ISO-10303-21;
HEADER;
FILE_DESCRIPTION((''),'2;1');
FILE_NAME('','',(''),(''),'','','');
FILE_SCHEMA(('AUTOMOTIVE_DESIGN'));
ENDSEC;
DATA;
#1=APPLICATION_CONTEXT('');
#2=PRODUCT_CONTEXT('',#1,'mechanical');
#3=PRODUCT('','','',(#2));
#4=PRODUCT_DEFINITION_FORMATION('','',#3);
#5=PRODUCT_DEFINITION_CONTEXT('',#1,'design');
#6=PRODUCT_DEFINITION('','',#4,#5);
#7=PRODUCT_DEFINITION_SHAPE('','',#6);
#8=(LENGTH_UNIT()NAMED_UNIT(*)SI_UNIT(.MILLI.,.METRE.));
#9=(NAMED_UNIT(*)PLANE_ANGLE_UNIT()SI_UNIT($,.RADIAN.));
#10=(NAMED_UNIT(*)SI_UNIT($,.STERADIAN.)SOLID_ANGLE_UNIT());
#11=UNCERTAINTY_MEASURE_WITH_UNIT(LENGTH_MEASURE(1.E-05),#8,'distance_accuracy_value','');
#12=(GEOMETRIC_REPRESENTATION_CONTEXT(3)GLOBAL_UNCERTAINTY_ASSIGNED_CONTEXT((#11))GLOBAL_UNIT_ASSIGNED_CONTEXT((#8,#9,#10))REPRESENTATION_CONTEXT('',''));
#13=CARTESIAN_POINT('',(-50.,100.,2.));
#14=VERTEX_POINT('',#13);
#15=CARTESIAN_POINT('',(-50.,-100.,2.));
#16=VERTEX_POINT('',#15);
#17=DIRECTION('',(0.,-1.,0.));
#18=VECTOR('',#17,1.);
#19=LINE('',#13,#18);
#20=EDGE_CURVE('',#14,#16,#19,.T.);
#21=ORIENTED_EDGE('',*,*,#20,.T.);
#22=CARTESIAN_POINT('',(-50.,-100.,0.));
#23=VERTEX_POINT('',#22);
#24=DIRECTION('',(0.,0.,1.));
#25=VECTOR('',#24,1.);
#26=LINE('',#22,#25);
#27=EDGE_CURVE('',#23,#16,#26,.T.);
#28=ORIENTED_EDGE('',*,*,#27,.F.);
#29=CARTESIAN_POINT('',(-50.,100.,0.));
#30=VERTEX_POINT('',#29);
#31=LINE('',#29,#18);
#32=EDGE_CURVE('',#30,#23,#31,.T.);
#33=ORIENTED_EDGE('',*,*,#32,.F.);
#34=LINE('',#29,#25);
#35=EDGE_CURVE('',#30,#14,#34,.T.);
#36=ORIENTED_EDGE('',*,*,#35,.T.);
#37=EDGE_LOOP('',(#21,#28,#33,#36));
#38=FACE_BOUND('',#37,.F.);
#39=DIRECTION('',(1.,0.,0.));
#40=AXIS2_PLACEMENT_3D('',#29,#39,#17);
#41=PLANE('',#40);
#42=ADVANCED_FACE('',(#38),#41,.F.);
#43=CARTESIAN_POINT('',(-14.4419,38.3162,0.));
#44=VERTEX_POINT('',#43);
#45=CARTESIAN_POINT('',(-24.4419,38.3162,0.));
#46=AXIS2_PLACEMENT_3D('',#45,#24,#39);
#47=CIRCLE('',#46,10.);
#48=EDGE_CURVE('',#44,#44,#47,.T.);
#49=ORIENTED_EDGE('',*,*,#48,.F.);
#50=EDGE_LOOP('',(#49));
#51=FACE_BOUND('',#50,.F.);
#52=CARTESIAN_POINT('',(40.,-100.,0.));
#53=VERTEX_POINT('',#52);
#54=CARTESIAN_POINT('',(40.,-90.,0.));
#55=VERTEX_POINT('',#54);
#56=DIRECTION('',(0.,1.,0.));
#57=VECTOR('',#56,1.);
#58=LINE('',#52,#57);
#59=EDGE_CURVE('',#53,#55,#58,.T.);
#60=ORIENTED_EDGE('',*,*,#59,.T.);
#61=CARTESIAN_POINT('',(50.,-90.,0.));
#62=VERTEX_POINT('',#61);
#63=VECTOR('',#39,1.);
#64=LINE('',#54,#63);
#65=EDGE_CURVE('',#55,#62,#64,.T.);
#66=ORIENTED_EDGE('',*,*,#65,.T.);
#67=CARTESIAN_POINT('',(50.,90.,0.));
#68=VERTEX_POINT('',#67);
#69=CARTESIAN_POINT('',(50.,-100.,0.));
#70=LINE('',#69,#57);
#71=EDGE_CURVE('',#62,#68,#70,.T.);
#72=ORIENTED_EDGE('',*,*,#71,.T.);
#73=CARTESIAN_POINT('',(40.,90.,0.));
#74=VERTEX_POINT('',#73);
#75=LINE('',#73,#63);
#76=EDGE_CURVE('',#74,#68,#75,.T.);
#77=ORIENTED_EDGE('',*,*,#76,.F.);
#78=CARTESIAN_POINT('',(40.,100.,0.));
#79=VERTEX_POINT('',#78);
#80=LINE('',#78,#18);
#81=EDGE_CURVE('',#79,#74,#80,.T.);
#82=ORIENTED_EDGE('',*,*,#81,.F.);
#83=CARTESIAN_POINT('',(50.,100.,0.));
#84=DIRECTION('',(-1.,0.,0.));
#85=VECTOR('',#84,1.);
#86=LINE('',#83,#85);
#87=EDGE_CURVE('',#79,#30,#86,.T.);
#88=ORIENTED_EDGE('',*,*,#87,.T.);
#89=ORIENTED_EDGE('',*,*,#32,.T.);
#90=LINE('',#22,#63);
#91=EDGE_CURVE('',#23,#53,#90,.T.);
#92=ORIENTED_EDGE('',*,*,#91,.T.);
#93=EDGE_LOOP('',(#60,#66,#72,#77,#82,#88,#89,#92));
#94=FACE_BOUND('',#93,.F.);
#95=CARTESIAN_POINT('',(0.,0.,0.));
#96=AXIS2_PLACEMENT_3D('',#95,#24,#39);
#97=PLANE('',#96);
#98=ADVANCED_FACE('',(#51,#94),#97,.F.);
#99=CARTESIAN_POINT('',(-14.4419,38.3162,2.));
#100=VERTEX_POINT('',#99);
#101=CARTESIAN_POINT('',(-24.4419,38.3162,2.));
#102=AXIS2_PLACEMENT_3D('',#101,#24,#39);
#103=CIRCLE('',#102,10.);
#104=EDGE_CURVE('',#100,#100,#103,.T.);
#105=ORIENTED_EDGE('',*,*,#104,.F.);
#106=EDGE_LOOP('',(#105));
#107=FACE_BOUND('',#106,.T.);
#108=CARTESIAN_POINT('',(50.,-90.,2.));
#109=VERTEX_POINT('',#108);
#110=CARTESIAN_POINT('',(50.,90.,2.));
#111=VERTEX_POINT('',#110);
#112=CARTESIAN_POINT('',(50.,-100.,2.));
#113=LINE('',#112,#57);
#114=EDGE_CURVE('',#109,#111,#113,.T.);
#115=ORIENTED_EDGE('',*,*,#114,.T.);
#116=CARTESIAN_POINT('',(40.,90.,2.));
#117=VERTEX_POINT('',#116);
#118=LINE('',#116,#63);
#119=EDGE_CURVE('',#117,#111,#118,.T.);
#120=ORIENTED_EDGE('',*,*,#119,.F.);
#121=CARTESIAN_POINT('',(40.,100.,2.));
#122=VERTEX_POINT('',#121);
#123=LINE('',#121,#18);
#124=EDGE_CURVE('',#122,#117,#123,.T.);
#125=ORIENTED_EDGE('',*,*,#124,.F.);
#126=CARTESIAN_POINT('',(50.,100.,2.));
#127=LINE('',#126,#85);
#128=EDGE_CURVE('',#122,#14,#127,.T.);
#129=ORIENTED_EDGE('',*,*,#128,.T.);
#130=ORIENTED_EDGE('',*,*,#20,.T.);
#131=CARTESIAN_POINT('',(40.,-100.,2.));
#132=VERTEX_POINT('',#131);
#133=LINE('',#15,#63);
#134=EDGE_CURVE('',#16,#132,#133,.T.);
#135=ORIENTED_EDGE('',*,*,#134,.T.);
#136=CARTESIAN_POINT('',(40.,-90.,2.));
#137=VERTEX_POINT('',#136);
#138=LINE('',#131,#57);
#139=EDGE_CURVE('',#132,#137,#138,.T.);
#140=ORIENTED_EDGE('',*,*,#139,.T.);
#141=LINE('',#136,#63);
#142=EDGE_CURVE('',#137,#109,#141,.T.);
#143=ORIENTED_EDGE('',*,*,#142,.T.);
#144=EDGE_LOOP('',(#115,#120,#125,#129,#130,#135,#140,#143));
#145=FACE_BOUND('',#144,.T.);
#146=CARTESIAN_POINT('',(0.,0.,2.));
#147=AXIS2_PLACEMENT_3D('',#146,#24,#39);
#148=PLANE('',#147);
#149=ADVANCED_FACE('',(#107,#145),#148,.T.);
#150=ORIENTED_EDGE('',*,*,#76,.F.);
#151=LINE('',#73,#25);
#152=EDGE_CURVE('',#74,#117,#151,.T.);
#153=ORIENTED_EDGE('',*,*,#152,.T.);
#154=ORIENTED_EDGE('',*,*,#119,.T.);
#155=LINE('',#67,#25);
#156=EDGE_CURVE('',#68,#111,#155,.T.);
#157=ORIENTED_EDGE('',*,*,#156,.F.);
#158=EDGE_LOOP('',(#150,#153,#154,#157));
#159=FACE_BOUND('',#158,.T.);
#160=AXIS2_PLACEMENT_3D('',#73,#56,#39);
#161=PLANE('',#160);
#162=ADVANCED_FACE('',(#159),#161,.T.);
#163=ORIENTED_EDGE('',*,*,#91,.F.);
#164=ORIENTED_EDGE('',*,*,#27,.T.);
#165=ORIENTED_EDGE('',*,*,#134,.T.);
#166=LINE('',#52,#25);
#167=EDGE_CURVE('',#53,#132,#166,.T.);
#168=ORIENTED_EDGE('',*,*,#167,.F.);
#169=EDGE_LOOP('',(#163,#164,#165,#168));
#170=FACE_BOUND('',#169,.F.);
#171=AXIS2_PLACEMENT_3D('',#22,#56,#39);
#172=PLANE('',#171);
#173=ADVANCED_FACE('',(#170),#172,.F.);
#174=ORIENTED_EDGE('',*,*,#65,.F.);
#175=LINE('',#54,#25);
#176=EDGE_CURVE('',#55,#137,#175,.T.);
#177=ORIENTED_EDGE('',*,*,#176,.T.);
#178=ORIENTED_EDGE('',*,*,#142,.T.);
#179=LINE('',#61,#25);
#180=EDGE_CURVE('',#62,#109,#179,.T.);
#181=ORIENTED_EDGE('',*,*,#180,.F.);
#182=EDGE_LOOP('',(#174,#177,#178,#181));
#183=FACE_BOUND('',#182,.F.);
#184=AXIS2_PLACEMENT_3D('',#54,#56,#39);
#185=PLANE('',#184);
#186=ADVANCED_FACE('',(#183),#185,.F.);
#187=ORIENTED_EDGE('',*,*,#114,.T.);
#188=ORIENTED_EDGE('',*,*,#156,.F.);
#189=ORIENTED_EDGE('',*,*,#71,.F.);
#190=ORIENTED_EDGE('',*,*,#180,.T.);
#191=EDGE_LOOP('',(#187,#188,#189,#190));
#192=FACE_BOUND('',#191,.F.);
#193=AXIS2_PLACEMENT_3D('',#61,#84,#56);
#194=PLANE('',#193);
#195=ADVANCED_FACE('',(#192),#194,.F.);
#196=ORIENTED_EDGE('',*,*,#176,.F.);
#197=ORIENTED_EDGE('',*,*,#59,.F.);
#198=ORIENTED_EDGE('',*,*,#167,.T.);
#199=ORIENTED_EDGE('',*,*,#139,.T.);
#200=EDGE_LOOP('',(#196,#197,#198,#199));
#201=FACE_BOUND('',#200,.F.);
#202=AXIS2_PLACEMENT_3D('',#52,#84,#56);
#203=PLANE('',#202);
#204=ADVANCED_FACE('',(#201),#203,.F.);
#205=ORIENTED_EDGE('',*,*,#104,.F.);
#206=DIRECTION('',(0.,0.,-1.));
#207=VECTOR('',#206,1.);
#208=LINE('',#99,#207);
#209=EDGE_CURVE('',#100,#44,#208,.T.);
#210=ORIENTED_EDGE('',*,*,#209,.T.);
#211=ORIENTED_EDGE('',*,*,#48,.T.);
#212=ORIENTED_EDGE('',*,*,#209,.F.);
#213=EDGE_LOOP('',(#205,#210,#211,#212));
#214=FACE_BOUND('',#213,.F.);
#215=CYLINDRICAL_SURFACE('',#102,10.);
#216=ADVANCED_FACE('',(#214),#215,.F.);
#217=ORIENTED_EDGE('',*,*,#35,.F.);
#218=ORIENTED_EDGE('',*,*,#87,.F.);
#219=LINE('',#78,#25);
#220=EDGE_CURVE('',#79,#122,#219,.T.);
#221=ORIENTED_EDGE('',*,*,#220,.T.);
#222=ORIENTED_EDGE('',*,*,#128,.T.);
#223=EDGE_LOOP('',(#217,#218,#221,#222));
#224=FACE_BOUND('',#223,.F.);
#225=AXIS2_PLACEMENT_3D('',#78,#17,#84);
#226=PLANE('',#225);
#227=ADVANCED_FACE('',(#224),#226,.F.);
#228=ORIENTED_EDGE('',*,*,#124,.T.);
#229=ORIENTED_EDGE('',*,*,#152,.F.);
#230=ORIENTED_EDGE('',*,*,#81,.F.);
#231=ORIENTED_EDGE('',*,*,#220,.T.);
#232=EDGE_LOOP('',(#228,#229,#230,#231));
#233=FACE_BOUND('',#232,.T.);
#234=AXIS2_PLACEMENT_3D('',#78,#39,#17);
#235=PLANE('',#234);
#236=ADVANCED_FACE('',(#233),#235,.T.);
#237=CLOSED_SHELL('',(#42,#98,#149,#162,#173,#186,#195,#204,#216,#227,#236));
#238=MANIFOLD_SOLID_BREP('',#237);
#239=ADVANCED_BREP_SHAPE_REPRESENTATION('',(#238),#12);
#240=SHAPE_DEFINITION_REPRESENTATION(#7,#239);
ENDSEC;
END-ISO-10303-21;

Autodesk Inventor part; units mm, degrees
ref_plane "YZ Plane" through (0, 0, 0) normal (1, 0, 0) x (0, 1, 0)
ref_plane "XZ Plane" through (0, 0, 0) normal (0, 1, 0) x (-1, 0, 0)
ref_plane "XY Plane" through (0, 0, 0) normal (0, 0, 1) x (1, 0, 0)
sketch "Sketch1" plane through (0, 0, 0) normal (0, 0, 1) x (1, 0, 0)
  line L0 (-50, -100) -> (50, -100)
  line L1 (50, -100) -> (50, 100)
  line L2 (50, 100) -> (-50, 100)
  line L3 (-50, 100) -> (-50, -100)
  line L4 (-50, -100) -> (50, 100) construction
  line L5 (50, -100) -> (-50, 100) construction
  line L6 (50, 100) -> (40, 100)
  line L7 (40, 100) -> (40, 90)
  line L8 (40, 90) -> (50, 90)
  line L9 (50, 90) -> (50, 100)
  line L10 (50, -100) -> (40, -100)
  line L11 (40, -100) -> (40, -90)
  line L12 (40, -90) -> (50, -90)
  line L13 (50, -90) -> (50, -100)
  point P0 (0, 0)
  dimension "d154" = 100
  dimension "d155" = 200
  dimension "d158" = 10
  dimension "d159" = 10
extrude "Plate5" add sketch "Sketch1" along normal blind 2 contours L3 L2 L7 L8 L1 L12 L11 L0
sketch "Sketch7" plane through (0, 0, 2) normal (0, 0, 1) x (1, 0, 0)
  circle A0 centre (-24.4419, 38.3162) radius 10
  point P0 (0, 0)
  dimension "d157" = 20
extrude "Cut1" cut sketch "Sketch7" against normal blind 2
sketch "Sketch8" plane through (0, 0, 2) normal (0, 0, 1) x (1, 0, 0)
  line L0 (-39.1312, 91.8227) -> (16.5981, 91.8227) construction
  line L1 (16.5981, 91.8227) -> (16.5981, 81.3689) construction
  line L2 (16.5981, 81.3689) -> (-39.1312, 81.3689) construction
  line L3 (-39.1312, 81.3689) -> (-39.1312, 91.8227) construction
  point P0 (0, 0)
mark "Mark2"
properties material "Stainless Steel"
